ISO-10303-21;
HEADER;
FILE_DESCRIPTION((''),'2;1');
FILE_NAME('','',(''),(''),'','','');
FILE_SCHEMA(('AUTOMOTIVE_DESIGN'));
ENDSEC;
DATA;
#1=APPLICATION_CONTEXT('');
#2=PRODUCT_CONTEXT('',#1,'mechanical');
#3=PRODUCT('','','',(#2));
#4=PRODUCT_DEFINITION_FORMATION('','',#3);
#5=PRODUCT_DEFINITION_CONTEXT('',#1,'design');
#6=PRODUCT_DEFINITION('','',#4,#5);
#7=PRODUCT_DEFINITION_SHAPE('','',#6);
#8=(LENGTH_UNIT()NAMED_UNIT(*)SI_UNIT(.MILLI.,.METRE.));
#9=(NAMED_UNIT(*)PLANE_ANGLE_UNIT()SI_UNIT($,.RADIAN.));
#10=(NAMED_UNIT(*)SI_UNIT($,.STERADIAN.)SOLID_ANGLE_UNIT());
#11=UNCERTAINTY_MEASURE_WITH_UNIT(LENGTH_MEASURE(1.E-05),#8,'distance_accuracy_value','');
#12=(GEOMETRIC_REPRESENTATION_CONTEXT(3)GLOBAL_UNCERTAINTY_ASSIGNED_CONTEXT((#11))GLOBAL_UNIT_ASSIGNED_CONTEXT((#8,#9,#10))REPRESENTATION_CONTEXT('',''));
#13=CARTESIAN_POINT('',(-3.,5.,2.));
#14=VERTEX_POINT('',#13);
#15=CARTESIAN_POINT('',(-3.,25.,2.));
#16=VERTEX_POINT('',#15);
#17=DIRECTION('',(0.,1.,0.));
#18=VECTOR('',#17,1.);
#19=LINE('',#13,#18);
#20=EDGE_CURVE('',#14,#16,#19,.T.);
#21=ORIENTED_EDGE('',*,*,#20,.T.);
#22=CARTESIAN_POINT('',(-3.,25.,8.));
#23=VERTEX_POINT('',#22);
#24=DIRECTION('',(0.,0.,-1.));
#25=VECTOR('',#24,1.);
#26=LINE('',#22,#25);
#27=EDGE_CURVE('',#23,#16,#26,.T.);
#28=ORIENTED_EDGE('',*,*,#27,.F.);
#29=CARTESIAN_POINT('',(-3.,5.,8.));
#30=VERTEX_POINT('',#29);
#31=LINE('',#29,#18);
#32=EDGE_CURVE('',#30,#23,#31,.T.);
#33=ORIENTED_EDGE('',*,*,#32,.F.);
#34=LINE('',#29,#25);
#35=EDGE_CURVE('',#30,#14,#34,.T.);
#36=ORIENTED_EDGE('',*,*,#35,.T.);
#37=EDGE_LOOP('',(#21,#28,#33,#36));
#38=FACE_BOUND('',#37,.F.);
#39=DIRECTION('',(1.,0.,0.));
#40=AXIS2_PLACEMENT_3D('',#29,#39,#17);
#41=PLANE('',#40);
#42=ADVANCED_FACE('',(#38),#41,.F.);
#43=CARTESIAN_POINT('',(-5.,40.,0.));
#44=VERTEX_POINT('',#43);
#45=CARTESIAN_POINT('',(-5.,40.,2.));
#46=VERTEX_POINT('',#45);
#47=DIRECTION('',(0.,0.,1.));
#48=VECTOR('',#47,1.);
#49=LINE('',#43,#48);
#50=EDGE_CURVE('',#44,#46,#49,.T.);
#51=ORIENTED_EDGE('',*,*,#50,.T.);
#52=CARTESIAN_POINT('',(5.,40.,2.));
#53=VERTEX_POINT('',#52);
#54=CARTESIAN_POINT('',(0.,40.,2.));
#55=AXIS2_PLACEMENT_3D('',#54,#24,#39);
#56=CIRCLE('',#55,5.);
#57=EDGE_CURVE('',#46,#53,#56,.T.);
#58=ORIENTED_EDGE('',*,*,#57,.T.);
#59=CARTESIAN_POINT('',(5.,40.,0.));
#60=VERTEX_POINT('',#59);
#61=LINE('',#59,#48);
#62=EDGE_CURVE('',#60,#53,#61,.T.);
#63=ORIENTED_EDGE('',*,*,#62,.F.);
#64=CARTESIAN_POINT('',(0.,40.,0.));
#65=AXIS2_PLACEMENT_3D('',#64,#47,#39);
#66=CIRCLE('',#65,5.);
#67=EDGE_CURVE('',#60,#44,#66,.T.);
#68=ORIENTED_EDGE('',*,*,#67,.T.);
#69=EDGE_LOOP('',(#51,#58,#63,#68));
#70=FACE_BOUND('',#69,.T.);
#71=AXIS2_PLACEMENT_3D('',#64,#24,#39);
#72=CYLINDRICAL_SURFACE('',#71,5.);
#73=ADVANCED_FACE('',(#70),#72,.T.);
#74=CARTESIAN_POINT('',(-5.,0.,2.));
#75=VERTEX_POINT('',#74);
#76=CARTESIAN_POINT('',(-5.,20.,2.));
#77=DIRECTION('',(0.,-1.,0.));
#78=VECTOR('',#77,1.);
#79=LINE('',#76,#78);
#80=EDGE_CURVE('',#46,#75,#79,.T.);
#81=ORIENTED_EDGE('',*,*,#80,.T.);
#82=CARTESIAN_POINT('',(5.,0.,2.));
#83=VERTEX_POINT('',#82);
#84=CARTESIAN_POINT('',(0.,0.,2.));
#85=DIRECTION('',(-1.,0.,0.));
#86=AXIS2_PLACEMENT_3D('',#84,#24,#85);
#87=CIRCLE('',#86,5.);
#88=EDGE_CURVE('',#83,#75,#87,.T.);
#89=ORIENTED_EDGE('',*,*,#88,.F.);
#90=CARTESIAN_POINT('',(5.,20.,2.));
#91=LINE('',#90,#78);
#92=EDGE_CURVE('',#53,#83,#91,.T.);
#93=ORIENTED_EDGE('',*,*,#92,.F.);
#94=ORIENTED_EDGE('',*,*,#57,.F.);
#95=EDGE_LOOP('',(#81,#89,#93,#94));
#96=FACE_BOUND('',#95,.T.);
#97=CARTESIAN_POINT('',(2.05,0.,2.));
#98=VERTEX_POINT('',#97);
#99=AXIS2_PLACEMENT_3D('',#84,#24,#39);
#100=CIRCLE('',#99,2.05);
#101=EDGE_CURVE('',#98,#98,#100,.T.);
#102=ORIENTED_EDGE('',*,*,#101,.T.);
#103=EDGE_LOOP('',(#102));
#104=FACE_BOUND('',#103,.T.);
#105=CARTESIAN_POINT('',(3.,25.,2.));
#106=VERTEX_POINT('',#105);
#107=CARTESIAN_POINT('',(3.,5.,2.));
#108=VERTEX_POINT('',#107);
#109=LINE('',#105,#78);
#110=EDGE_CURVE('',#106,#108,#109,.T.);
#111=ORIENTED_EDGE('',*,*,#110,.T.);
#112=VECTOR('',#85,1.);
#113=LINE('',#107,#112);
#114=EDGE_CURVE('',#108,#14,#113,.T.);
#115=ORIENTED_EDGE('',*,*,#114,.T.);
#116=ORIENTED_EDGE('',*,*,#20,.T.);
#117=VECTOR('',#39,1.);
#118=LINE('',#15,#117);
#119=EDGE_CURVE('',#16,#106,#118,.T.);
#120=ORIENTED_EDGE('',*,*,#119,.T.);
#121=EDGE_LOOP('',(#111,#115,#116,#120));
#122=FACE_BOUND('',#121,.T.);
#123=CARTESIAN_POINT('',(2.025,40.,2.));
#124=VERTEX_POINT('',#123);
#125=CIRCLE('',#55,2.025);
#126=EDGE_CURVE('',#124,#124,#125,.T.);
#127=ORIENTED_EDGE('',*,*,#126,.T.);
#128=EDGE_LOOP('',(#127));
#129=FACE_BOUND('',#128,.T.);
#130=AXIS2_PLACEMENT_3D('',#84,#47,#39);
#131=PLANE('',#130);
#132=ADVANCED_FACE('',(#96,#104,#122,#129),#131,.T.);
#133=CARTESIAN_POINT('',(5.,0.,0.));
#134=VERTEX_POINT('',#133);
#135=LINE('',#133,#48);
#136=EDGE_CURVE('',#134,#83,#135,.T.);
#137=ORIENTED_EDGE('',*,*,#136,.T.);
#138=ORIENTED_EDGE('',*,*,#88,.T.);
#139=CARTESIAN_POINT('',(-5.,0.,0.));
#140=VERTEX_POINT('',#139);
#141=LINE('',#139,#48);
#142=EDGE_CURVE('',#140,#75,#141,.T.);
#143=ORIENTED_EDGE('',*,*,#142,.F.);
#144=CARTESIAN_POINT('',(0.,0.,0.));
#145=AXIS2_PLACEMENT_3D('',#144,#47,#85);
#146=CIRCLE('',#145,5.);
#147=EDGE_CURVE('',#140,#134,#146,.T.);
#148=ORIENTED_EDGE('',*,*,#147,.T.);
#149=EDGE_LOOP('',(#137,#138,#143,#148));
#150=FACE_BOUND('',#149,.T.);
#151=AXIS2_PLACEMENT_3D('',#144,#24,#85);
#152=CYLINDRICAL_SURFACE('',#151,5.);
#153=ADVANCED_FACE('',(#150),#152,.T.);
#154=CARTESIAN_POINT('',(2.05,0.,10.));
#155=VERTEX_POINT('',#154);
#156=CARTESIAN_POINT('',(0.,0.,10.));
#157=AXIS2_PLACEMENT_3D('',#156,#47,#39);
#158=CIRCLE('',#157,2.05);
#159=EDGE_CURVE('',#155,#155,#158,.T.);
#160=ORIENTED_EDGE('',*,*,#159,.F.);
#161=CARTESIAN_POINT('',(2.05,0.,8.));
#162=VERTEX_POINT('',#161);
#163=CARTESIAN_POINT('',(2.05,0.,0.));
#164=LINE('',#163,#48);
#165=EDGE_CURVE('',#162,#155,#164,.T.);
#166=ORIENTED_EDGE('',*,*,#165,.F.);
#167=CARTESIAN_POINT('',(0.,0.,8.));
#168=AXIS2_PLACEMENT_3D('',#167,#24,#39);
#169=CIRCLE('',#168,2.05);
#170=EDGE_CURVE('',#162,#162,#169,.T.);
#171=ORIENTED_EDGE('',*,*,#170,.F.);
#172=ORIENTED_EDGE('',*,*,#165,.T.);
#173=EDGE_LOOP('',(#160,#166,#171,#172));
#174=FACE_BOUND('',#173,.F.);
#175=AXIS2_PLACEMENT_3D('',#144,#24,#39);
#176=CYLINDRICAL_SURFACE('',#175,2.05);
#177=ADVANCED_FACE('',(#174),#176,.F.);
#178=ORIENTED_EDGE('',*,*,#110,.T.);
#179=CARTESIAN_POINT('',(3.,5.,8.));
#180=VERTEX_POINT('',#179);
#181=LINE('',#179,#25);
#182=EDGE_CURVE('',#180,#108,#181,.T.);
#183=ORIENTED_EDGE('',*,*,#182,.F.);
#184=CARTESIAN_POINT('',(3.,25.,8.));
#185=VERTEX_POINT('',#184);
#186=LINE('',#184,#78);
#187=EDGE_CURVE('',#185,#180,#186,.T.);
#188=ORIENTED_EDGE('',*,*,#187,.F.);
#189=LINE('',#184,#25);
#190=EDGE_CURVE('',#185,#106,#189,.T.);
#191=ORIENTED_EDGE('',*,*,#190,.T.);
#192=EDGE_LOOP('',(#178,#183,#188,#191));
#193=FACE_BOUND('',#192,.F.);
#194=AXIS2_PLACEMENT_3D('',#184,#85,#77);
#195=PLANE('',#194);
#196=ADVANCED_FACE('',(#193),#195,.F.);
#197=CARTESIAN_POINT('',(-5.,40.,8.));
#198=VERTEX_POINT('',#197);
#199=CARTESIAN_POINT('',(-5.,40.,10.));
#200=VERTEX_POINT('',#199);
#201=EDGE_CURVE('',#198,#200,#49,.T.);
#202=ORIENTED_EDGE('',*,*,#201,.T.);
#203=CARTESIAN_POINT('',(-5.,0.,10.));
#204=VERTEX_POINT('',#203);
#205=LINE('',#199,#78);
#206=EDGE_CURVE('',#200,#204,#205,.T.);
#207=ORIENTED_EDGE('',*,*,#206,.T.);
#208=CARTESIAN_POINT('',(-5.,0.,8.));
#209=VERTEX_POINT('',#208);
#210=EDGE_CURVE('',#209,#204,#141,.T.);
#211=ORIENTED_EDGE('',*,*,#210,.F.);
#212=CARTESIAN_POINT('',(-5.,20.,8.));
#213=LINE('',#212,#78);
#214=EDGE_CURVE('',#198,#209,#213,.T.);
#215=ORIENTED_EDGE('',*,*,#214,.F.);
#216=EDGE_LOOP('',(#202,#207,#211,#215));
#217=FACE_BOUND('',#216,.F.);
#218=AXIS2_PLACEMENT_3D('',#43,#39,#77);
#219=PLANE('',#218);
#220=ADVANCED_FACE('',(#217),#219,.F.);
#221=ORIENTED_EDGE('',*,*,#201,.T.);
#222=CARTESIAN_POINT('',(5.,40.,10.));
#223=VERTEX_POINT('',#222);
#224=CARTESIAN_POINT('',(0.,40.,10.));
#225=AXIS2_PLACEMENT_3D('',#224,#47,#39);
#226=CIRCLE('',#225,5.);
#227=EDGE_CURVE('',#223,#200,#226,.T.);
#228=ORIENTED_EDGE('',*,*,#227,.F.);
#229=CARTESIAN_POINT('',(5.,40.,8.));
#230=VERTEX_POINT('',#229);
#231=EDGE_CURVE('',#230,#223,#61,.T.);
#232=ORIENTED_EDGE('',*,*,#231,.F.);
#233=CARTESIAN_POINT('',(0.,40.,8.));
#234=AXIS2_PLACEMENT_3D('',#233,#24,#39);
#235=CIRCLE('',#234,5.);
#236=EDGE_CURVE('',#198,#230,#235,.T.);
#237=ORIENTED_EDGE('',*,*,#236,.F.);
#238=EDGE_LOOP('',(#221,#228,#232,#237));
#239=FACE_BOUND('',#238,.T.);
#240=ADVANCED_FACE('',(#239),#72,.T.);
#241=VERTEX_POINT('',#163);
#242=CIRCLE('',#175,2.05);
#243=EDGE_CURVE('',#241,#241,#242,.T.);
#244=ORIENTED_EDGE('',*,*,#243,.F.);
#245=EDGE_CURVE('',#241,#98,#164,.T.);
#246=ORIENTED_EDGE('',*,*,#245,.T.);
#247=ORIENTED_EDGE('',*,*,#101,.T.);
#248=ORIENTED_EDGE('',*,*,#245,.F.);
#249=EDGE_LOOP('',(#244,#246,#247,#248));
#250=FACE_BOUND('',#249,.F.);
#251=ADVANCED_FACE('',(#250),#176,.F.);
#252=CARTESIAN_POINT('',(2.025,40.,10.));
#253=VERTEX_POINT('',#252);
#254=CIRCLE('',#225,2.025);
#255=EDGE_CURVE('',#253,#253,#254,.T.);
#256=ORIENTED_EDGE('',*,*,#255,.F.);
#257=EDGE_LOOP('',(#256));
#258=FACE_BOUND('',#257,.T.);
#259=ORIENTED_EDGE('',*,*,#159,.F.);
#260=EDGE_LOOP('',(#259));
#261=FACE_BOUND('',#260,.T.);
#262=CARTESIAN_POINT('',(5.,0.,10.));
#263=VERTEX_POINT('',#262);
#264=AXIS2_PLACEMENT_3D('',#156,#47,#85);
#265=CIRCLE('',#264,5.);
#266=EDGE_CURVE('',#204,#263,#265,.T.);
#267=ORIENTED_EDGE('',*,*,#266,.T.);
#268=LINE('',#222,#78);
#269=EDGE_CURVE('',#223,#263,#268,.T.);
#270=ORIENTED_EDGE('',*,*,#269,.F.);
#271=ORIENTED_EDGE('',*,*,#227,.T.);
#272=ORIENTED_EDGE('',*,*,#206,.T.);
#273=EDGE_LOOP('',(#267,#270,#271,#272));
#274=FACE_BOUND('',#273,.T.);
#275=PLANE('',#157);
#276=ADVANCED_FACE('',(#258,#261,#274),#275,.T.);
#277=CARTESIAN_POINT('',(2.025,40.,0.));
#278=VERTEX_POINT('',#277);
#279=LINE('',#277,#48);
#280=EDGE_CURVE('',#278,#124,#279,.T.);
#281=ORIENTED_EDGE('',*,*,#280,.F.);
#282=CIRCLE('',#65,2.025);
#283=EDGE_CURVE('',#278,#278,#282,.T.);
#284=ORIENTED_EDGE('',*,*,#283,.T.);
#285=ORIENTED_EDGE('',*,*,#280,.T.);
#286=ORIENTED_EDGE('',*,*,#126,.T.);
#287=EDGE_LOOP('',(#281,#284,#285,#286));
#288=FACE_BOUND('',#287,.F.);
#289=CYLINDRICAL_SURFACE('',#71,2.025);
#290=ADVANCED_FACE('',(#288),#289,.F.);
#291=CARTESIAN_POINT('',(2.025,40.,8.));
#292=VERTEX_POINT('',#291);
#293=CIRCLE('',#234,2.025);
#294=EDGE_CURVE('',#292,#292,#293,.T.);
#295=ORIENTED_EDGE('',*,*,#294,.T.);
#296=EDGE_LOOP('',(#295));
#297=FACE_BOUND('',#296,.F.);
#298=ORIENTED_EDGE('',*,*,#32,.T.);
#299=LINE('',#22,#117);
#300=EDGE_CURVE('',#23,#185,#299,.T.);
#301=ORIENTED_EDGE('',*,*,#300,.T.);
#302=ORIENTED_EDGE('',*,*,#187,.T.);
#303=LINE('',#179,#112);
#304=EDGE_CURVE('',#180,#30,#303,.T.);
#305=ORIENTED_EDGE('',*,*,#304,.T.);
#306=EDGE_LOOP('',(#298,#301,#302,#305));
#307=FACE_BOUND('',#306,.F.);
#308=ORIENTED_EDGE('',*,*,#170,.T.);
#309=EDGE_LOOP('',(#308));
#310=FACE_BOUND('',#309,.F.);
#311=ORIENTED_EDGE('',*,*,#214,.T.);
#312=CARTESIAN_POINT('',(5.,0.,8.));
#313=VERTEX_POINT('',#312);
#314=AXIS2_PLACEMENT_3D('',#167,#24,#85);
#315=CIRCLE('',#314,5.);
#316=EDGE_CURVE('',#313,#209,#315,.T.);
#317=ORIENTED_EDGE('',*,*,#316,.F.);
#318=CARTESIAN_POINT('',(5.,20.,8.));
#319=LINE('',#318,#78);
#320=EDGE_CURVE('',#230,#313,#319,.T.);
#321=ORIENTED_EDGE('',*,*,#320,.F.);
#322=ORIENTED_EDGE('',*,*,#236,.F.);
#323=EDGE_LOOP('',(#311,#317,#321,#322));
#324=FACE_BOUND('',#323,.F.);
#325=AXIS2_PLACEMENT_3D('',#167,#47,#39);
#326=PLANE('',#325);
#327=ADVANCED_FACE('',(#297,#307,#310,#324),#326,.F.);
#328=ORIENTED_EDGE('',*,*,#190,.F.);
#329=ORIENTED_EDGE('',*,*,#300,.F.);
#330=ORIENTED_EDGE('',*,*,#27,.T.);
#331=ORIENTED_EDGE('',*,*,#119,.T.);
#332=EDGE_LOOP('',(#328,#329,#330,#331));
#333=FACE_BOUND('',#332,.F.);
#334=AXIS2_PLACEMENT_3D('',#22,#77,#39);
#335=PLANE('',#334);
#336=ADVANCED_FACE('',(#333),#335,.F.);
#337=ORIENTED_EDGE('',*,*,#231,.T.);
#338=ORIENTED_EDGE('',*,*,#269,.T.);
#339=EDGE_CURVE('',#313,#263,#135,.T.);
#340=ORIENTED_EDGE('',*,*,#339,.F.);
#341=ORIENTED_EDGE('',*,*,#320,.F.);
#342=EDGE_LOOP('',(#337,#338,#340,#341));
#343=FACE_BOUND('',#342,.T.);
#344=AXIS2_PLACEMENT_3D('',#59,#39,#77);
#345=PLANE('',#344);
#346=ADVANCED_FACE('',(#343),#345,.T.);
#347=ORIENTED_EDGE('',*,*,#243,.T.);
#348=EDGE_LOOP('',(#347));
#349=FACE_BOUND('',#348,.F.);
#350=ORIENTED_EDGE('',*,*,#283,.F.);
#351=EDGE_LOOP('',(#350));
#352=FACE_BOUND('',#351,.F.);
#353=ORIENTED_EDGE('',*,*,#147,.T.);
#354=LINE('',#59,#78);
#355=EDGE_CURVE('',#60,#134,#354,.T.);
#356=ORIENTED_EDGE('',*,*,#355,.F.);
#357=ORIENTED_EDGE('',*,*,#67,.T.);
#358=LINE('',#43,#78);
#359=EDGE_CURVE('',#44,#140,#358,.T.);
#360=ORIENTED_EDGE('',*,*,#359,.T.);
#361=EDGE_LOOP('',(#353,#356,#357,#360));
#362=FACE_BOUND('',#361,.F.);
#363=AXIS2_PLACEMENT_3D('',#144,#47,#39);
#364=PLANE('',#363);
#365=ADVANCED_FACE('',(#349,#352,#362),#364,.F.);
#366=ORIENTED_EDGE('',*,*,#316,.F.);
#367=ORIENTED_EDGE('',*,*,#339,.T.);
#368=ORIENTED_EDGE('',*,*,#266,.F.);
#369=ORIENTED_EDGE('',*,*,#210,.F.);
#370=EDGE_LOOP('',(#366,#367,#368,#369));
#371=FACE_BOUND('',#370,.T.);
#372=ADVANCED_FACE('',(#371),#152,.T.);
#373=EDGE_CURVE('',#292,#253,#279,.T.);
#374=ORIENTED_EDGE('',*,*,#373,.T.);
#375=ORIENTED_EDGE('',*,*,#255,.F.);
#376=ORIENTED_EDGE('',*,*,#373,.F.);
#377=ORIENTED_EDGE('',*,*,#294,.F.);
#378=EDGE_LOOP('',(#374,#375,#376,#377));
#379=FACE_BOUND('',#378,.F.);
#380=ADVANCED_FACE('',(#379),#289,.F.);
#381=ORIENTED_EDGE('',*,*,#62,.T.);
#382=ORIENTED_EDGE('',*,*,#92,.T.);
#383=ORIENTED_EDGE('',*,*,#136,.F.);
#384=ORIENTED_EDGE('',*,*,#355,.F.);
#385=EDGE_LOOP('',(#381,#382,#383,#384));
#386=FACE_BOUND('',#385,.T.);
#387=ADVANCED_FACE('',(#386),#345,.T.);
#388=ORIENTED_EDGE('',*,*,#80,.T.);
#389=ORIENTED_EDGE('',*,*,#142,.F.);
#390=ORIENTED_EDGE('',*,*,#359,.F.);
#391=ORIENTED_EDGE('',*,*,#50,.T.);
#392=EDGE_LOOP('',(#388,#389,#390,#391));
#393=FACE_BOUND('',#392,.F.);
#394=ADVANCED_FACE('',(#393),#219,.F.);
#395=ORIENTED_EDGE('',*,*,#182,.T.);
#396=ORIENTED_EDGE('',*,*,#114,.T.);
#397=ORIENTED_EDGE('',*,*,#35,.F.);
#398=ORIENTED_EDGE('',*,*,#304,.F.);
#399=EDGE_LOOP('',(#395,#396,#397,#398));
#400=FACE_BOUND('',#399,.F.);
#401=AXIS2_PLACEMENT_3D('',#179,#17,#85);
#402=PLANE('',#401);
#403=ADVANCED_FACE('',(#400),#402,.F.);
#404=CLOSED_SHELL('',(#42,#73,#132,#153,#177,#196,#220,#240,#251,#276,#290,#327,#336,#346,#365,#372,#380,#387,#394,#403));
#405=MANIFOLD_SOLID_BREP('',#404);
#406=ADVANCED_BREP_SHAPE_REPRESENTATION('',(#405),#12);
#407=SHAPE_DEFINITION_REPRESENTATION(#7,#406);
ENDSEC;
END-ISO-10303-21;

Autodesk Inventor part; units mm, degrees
ref_plane "YZ Plane" through (0, 0, 0) normal (1, 0, 0) x (0, 1, 0)
ref_plane "XZ Plane" through (0, 0, 0) normal (0, 1, 0) x (-1, 0, 0)
ref_plane "XY Plane" through (0, 0, 0) normal (0, 0, 1) x (1, 0, 0)
sketch "Sketch1" plane through (0, 0, 0) normal (0, 0, 1) x (1, 0, 0)
  circle A0 centre (0, 0) radius 2.05
  arc A1 (-5, 0) -> (5, 0) centre (0, 0) ccw
  circle A2 centre (0, 40) radius 2.025
  arc A3 (5, 40) -> (-5, 40) centre (0, 40) ccw
  line L0 (-5, 40) -> (-5, 0)
  line L1 (5, 40) -> (5, 0)
  line L2 (0, 0) -> (0, 2.05)
  line L3 (0, 37.975) -> (0, 40)
  dimension "d0" = 4.1
  dimension "d3" = 4.05
  dimension "d1" = 10
  dimension "d2" = 40
  dimension "d4" = 10
extrude "Extrusion1" add sketch "Sketch1" along normal blind 10
shell "Shell1" thickness 2 removed faces 4 at (3.9972, 43.0037, 6.6667) at (-4.9838, -0.4023, 6.6667) at (-5, 13.3333, 3.3333) at (5, 26.6667, 3.3333)
sketch "Sketch2" plane through (0, 40, 8) normal (0, 0, -1) x (-1, 0, 0)
  line L0 (-3, -35) -> (3, -35)
  line L1 (3, -35) -> (3, -15)
  line L2 (3, -15) -> (-3, -15)
  line L3 (-3, -15) -> (-3, -35)
  circle A0 centre (0, 0) radius 2.025 projected
  point P0 (0, -40)
  dimension "d13" = 6
  dimension "d14" = 20
  dimension "d18" = 5
extrude "Extrusion2" add sketch "Sketch2" along normal blind 6 contours L3 L2 L1 L0
delete faces "Delete Face1" heal yes whole lump no faces at (4.0369, 0.3259, 4)
delete faces "Delete Face2" heal yes whole lump no faces at (4.0119, 40.3239, 4)
properties part number "Crank" material "Steel, Mild"
